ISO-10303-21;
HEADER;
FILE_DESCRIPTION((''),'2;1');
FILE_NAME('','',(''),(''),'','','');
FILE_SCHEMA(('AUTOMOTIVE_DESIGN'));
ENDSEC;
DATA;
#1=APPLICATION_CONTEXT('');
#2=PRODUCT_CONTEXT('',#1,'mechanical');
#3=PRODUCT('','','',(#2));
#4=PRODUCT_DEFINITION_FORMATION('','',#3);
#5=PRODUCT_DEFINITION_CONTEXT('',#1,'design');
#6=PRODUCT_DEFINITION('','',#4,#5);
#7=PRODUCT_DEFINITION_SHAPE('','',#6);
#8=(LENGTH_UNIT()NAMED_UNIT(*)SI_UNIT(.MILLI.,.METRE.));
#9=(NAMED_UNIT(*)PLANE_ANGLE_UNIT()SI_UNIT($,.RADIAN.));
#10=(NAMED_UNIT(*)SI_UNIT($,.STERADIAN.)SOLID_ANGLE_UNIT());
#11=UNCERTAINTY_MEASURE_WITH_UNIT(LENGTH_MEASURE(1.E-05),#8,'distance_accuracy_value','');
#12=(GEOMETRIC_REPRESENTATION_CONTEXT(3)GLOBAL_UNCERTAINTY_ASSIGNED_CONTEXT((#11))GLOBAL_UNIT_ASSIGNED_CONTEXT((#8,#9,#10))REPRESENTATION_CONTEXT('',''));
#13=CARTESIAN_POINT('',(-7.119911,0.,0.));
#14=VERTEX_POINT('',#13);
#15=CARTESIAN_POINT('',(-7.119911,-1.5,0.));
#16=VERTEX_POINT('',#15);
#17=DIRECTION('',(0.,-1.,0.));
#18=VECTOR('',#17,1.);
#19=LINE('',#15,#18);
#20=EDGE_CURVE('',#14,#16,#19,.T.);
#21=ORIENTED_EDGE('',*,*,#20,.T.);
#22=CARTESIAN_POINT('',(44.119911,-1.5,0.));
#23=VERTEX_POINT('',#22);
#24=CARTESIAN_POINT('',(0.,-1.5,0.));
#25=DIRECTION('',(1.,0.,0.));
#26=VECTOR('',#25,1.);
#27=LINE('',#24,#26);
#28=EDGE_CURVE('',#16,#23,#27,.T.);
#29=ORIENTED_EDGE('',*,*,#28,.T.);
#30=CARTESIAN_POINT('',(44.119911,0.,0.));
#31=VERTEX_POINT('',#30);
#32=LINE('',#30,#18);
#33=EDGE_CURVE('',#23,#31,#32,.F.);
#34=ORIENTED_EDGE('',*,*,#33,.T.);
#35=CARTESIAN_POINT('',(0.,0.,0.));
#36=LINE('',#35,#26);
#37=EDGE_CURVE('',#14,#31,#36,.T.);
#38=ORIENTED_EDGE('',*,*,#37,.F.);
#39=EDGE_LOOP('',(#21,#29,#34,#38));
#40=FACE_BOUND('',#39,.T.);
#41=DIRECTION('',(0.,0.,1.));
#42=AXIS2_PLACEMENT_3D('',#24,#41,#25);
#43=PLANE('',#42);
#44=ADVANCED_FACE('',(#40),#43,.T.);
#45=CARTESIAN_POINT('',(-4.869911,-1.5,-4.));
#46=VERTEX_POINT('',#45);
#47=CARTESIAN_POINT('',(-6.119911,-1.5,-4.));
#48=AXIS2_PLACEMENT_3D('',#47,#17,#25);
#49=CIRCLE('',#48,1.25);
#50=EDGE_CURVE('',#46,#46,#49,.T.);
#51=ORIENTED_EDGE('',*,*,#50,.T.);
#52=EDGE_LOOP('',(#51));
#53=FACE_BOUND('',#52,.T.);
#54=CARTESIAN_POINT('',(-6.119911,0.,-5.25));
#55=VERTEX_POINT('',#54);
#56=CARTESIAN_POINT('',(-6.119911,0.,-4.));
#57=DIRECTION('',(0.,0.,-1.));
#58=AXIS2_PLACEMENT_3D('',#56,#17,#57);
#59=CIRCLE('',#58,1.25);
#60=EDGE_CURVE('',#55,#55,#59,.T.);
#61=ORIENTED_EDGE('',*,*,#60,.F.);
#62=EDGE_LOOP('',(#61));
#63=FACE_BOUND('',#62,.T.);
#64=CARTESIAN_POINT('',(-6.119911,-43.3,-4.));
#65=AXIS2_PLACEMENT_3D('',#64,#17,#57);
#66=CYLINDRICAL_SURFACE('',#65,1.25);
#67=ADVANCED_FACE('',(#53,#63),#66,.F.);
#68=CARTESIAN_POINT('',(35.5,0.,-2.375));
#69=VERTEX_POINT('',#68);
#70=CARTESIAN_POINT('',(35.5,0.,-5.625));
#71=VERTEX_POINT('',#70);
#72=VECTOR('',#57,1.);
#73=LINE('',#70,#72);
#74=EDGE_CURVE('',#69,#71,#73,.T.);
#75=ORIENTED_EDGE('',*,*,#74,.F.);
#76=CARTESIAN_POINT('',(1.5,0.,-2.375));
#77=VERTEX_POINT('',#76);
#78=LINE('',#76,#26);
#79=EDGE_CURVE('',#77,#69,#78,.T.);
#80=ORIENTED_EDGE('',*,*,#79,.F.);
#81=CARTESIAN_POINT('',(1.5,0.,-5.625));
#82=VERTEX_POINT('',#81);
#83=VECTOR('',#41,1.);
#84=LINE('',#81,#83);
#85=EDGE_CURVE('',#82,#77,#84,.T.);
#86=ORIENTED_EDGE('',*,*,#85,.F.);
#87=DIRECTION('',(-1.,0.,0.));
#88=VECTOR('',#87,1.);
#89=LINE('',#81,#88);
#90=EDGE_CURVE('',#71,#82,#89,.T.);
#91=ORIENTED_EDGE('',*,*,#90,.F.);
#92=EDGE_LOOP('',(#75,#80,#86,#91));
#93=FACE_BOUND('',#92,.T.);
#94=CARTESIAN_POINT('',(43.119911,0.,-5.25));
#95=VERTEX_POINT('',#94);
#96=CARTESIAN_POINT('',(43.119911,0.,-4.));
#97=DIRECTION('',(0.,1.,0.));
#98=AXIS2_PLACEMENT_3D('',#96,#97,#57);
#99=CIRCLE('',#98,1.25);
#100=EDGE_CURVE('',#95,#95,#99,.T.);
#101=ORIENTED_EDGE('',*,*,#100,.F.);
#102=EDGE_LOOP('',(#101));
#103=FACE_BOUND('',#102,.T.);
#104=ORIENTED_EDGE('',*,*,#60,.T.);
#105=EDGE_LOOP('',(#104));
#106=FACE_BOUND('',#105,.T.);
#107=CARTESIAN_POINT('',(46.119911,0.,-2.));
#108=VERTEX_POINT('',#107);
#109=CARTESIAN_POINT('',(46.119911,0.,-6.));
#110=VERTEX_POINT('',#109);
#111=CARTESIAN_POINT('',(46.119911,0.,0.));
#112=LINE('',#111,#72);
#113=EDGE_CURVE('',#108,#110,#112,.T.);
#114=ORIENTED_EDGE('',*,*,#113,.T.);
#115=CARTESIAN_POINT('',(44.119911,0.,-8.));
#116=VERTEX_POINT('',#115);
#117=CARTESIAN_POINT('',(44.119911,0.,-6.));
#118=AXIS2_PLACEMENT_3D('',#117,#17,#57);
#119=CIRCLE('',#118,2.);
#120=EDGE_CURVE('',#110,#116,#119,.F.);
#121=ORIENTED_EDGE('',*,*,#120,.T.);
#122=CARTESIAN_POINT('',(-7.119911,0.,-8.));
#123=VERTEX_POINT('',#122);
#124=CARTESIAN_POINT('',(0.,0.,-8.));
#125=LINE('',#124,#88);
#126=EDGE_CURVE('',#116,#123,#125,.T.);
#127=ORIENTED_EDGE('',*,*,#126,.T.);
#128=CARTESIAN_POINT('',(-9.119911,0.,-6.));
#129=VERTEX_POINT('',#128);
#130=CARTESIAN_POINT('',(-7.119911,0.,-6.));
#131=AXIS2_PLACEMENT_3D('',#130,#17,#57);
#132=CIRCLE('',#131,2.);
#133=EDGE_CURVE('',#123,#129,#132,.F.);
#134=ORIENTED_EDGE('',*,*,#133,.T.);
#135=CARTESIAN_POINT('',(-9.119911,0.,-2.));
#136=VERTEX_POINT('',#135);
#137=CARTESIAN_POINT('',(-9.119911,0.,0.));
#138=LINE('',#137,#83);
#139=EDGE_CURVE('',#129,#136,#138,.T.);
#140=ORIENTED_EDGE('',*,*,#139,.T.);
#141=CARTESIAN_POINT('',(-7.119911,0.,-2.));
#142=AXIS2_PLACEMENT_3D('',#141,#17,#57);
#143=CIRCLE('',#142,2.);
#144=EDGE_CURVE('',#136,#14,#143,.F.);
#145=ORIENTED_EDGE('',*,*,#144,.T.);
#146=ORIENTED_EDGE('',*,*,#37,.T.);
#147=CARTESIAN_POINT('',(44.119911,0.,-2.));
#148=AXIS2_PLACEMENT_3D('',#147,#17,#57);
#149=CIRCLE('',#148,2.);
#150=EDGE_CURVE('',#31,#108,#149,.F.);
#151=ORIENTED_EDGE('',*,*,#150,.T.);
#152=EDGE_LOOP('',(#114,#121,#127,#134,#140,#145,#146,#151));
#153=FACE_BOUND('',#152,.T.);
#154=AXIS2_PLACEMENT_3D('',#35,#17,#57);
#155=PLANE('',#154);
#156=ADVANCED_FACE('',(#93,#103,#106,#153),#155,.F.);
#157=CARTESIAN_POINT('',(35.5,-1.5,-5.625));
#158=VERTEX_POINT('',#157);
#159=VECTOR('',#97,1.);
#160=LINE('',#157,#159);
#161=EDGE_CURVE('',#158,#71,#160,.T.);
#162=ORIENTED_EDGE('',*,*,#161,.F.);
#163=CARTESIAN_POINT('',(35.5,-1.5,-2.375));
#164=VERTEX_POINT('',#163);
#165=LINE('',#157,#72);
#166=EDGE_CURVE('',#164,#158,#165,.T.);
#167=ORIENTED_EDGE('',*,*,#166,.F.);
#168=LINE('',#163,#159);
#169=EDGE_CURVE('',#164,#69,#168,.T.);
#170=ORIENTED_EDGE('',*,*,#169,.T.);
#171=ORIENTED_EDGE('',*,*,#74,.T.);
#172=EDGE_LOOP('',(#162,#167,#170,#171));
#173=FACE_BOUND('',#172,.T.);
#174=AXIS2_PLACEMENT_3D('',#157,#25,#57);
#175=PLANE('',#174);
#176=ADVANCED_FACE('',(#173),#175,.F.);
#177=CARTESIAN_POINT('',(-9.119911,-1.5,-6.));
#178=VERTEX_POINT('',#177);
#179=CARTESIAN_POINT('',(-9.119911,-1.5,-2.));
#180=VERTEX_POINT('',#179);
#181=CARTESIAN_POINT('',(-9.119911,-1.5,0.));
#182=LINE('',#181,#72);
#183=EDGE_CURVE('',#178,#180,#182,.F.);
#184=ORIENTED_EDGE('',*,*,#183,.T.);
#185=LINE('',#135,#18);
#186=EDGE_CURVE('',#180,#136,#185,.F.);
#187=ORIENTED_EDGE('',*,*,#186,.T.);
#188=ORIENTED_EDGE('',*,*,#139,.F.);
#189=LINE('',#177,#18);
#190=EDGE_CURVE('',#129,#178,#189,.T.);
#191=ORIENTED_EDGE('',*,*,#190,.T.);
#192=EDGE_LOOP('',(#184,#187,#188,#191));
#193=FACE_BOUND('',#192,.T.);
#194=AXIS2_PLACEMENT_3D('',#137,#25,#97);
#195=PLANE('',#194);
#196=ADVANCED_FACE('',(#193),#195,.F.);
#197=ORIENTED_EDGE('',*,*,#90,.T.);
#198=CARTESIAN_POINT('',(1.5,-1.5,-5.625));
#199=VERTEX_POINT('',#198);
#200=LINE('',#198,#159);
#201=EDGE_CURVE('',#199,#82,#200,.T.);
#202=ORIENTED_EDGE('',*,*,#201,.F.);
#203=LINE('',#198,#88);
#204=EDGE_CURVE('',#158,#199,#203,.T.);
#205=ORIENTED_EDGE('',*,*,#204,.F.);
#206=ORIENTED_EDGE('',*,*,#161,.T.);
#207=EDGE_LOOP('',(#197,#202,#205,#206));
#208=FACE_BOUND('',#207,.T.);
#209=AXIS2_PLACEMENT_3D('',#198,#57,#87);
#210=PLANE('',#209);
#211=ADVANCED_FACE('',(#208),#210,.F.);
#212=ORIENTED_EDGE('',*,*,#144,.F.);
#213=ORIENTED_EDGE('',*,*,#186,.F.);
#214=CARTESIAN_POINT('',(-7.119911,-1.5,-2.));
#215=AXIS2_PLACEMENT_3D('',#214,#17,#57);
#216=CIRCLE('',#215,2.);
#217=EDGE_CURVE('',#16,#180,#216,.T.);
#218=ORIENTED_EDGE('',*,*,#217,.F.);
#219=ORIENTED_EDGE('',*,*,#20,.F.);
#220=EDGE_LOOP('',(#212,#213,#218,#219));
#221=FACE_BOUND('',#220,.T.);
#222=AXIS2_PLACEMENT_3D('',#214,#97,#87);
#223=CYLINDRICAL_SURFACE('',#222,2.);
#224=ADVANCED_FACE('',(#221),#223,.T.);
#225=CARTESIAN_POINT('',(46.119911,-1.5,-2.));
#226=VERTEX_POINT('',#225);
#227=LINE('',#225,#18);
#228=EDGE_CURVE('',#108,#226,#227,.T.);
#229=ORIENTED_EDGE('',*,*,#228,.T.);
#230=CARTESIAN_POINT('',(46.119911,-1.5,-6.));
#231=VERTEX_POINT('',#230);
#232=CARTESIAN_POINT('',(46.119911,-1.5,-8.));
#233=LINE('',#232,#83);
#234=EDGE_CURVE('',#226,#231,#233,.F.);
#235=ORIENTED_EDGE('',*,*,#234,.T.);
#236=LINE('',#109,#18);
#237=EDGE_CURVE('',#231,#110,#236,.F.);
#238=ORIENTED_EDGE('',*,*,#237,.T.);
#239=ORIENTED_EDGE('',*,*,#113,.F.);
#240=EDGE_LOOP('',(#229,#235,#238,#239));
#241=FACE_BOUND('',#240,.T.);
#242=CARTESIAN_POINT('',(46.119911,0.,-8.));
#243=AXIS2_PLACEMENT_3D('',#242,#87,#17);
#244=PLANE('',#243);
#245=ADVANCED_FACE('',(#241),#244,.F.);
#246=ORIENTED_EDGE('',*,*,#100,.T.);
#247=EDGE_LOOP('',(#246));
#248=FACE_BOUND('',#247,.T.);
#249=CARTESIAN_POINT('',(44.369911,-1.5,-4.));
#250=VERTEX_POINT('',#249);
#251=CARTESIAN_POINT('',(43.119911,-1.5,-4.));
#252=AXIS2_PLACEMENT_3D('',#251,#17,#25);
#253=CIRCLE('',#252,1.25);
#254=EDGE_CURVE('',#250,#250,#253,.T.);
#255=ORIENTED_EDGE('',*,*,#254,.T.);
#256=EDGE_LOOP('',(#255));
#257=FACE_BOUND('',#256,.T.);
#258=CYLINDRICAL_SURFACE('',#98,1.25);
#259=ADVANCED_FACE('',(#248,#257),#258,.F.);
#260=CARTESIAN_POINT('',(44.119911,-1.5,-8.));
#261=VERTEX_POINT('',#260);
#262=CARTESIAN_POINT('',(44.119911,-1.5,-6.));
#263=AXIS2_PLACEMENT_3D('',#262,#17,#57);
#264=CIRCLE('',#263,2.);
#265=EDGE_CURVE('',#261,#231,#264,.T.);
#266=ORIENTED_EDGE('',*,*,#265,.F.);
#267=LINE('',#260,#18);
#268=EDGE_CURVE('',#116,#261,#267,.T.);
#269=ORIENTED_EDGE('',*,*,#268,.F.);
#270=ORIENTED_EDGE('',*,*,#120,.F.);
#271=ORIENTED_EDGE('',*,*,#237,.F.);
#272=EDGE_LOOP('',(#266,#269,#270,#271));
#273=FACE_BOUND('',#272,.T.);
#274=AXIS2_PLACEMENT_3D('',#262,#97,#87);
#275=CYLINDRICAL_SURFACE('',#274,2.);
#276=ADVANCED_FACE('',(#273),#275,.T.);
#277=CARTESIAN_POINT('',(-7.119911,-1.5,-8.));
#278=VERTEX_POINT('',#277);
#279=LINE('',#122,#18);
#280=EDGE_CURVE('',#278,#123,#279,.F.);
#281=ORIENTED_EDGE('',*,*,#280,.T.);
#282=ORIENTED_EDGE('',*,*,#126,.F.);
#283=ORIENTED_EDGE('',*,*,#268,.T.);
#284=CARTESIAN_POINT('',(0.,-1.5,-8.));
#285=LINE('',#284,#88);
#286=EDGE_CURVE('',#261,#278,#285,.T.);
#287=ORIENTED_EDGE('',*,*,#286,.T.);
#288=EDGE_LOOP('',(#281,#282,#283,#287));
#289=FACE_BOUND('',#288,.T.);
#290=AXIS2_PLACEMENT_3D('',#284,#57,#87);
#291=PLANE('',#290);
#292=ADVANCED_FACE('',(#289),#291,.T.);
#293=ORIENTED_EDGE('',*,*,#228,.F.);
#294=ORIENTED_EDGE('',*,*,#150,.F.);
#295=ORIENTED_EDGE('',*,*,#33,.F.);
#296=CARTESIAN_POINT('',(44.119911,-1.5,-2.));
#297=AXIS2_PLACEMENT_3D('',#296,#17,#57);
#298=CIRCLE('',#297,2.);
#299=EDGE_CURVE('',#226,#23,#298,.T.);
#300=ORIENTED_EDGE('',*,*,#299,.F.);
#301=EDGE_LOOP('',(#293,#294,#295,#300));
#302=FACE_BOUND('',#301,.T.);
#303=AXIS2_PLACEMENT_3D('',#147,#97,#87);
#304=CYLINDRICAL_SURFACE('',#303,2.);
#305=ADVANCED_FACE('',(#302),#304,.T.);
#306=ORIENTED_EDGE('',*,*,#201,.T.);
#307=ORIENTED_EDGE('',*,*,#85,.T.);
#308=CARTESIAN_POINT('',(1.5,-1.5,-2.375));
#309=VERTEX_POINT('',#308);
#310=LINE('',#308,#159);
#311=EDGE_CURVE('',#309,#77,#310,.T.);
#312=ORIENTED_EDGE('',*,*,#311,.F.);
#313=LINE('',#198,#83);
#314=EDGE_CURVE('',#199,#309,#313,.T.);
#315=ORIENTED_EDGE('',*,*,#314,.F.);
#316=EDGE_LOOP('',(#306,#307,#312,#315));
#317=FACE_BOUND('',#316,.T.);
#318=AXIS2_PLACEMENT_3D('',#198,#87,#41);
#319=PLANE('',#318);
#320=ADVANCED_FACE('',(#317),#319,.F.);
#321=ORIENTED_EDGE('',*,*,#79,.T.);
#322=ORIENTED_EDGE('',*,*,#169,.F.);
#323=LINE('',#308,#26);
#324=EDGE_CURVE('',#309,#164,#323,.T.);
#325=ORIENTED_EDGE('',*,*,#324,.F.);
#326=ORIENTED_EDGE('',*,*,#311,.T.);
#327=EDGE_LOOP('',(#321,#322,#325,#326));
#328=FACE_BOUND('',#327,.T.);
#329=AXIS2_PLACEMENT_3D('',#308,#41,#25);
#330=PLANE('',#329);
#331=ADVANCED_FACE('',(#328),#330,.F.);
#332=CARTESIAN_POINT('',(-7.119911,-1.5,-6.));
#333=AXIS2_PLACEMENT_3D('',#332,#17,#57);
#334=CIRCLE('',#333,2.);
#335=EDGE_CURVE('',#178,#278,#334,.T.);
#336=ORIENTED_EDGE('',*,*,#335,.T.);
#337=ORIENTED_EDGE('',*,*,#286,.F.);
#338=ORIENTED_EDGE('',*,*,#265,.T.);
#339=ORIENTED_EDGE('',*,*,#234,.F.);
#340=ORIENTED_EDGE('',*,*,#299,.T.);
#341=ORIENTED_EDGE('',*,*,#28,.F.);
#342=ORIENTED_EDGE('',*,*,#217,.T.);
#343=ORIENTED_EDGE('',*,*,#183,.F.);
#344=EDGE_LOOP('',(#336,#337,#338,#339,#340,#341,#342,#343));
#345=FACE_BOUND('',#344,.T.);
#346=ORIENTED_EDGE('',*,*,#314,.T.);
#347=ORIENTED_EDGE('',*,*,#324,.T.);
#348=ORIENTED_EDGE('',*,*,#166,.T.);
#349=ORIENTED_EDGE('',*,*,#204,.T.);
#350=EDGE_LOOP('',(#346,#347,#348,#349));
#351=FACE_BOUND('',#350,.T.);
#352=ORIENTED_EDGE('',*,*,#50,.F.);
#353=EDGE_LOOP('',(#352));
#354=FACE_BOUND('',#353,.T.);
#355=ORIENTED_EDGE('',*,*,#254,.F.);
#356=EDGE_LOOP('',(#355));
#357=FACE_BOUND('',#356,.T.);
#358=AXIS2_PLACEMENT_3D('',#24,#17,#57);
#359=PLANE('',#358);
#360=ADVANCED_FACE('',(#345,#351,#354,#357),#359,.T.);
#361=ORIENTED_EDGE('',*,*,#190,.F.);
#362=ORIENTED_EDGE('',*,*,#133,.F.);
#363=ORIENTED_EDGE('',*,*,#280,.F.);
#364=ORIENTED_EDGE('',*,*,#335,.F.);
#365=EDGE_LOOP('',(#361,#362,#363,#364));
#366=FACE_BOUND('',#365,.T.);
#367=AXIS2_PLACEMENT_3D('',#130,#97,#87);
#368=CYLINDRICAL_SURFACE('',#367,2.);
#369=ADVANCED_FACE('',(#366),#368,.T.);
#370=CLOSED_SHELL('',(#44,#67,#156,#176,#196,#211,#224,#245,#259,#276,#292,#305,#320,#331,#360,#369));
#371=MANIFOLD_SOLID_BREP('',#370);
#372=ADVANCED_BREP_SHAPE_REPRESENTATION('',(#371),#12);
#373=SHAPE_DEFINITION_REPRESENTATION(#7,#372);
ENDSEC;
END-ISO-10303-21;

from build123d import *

# Parameters (mm, degrees)
SKETCH1_W                   = 37
SKETCH1_H                   = 8
SKETCH1_W_2                 = 34
SKETCH1_H_2                 = 3.25
BASE_FLANGE1_DEPTH          = 1.5
EDGE_FLANGE1_DEPTH          = 8
EDGE_FLANGE1_BEND_DEPTH     = 8
TAP_DRILL_FOR_M3X0_5_TAP1_D = 2.5
FILLET1_START               = -8.5
FILLET1_OUTLINE_W           = 43.3
FILLET1_OUTLINE_H           = 8
FILLET1_OUTLINE_W_2         = 34
FILLET1_OUTLINE_H_2         = 3.25
FILLET1_DEPTH               = 7
FILLET1_START_2             = -1.5
FILLET1_2_OUTLINE_R         = 1.25
FILLET1_2_OUTLINE_W         = 34
FILLET1_2_OUTLINE_H         = 3.25
FILLET1_2_DEPTH             = 1.5


with BuildPart() as part:
    # Base-Flange1: sheet metal written as solids
    # Sketch1 → Base-Flange1 (new body)
    with BuildSketch(Plane(origin=(0, 0, 0), x_dir=(1, 0, 0), z_dir=(0, 1, 0))):
        with Locations((18.5, 4)):
            Rectangle(SKETCH1_W, SKETCH1_H)
        with Locations((18.5, 4)):
            Rectangle(SKETCH1_W_2, SKETCH1_H_2, mode=Mode.SUBTRACT)
    extrude(amount=-BASE_FLANGE1_DEPTH)

    # Edge-Flange1: sheet metal written as solids
    # Edge-Flange1 section (on a plane across the edge) → Edge-Flange1 (add)
    with BuildSketch(Plane(origin=(-1.65, -1.5, 0), x_dir=(1, 0, 0), z_dir=(0, 0, -1))):
        with BuildLine():
            Line((-1.5, 1.65), (-1.5, 7))
            Line((-1.5, 7), (0, 7))
            Line((0, 7), (0, 1.65))
            ThreePointArc((0, 1.65), (0.483273811, 0.483273811), (1.65, 0))
            Line((1.65, 0), (1.65, -1.5))
            ThreePointArc((1.65, -1.5), (-0.577386361, -0.577386361), (-1.5, 1.65))
        make_face()
    extrude(amount=EDGE_FLANGE1_DEPTH)

    # Edge-Flange1 section 2 (on a plane across the edge) → Edge-Flange1 bend (add)
    with BuildSketch(Plane(origin=(38.65, -1.5, -8), x_dir=(-1, 0, 0), z_dir=(0, 0, 1))):
        with BuildLine():
            Line((-1.5, 1.65), (-1.5, 7))
            Line((-1.5, 7), (0, 7))
            Line((0, 7), (0, 1.65))
            ThreePointArc((0, 1.65), (0.483273811, 0.483273811), (1.65, 0))
            Line((1.65, 0), (1.65, -1.5))
            ThreePointArc((1.65, -1.5), (-0.577386361, -0.577386361), (-1.5, 1.65))
        make_face()
    extrude(amount=EDGE_FLANGE1_BEND_DEPTH)

    # Tap Drill for M3x0.5 Tap1 (through all)
    with Locations(Plane(origin=(40.15, 0, 0), x_dir=(0, 0, -1), z_dir=(1, 0, 0))):
        with Locations((4, -5.5)):
            Hole(TAP_DRILL_FOR_M3X0_5_TAP1_D / 2)

    # Fillet1: read off the stored shape, not the designer's step
    # Fillet1 outline → Fillet1 (cut)
    with BuildSketch(Plane(origin=(0, 0, 0), x_dir=(1, 0, 0), z_dir=(0, 1, 0)).offset(FILLET1_START)):
        with Locations((18.5, 4)):
            Rectangle(FILLET1_OUTLINE_W, FILLET1_OUTLINE_H)
        with Locations((18.5, 4)):
            Rectangle(FILLET1_OUTLINE_W_2, FILLET1_OUTLINE_H_2, mode=Mode.SUBTRACT)
    extrude(amount=FILLET1_DEPTH, mode=Mode.SUBTRACT)

    # Fillet1 2 outline → Fillet1 2 (add)
    with BuildSketch(Plane(origin=(0, 0, 0), x_dir=(1, 0, 0), z_dir=(0, 1, 0)).offset(FILLET1_START_2)):
        with BuildLine():
            Line((-9.119911184, 6), (-9.119911184, 2))
            ThreePointArc((-9.119911184, 2), (-8.534124747, 0.585786438), (-7.119911184, 0))
            Line((-7.119911184, 0), (44.119911184, 0))
            ThreePointArc((44.119911184, 0), (45.534124747, 0.585786438), (46.119911184, 2))
            Line((46.119911184, 2), (46.119911184, 6))
            ThreePointArc((46.119911184, 6), (45.534124747, 7.414213562), (44.119911184, 8))
            Line((44.119911184, 8), (-7.119911184, 8))
            ThreePointArc((-7.119911184, 8), (-8.534124747, 7.414213562), (-9.119911184, 6))
        make_face()
        with Locations((-6.119911184, 4)):
            Circle(FILLET1_2_OUTLINE_R, mode=Mode.SUBTRACT)
        with Locations((18.5, 4)):
            Rectangle(FILLET1_2_OUTLINE_W, FILLET1_2_OUTLINE_H, mode=Mode.SUBTRACT)
        with Locations((43.119911184, 4)):
            Circle(FILLET1_2_OUTLINE_R, mode=Mode.SUBTRACT)
    extrude(amount=FILLET1_2_DEPTH)


solid = part.part
